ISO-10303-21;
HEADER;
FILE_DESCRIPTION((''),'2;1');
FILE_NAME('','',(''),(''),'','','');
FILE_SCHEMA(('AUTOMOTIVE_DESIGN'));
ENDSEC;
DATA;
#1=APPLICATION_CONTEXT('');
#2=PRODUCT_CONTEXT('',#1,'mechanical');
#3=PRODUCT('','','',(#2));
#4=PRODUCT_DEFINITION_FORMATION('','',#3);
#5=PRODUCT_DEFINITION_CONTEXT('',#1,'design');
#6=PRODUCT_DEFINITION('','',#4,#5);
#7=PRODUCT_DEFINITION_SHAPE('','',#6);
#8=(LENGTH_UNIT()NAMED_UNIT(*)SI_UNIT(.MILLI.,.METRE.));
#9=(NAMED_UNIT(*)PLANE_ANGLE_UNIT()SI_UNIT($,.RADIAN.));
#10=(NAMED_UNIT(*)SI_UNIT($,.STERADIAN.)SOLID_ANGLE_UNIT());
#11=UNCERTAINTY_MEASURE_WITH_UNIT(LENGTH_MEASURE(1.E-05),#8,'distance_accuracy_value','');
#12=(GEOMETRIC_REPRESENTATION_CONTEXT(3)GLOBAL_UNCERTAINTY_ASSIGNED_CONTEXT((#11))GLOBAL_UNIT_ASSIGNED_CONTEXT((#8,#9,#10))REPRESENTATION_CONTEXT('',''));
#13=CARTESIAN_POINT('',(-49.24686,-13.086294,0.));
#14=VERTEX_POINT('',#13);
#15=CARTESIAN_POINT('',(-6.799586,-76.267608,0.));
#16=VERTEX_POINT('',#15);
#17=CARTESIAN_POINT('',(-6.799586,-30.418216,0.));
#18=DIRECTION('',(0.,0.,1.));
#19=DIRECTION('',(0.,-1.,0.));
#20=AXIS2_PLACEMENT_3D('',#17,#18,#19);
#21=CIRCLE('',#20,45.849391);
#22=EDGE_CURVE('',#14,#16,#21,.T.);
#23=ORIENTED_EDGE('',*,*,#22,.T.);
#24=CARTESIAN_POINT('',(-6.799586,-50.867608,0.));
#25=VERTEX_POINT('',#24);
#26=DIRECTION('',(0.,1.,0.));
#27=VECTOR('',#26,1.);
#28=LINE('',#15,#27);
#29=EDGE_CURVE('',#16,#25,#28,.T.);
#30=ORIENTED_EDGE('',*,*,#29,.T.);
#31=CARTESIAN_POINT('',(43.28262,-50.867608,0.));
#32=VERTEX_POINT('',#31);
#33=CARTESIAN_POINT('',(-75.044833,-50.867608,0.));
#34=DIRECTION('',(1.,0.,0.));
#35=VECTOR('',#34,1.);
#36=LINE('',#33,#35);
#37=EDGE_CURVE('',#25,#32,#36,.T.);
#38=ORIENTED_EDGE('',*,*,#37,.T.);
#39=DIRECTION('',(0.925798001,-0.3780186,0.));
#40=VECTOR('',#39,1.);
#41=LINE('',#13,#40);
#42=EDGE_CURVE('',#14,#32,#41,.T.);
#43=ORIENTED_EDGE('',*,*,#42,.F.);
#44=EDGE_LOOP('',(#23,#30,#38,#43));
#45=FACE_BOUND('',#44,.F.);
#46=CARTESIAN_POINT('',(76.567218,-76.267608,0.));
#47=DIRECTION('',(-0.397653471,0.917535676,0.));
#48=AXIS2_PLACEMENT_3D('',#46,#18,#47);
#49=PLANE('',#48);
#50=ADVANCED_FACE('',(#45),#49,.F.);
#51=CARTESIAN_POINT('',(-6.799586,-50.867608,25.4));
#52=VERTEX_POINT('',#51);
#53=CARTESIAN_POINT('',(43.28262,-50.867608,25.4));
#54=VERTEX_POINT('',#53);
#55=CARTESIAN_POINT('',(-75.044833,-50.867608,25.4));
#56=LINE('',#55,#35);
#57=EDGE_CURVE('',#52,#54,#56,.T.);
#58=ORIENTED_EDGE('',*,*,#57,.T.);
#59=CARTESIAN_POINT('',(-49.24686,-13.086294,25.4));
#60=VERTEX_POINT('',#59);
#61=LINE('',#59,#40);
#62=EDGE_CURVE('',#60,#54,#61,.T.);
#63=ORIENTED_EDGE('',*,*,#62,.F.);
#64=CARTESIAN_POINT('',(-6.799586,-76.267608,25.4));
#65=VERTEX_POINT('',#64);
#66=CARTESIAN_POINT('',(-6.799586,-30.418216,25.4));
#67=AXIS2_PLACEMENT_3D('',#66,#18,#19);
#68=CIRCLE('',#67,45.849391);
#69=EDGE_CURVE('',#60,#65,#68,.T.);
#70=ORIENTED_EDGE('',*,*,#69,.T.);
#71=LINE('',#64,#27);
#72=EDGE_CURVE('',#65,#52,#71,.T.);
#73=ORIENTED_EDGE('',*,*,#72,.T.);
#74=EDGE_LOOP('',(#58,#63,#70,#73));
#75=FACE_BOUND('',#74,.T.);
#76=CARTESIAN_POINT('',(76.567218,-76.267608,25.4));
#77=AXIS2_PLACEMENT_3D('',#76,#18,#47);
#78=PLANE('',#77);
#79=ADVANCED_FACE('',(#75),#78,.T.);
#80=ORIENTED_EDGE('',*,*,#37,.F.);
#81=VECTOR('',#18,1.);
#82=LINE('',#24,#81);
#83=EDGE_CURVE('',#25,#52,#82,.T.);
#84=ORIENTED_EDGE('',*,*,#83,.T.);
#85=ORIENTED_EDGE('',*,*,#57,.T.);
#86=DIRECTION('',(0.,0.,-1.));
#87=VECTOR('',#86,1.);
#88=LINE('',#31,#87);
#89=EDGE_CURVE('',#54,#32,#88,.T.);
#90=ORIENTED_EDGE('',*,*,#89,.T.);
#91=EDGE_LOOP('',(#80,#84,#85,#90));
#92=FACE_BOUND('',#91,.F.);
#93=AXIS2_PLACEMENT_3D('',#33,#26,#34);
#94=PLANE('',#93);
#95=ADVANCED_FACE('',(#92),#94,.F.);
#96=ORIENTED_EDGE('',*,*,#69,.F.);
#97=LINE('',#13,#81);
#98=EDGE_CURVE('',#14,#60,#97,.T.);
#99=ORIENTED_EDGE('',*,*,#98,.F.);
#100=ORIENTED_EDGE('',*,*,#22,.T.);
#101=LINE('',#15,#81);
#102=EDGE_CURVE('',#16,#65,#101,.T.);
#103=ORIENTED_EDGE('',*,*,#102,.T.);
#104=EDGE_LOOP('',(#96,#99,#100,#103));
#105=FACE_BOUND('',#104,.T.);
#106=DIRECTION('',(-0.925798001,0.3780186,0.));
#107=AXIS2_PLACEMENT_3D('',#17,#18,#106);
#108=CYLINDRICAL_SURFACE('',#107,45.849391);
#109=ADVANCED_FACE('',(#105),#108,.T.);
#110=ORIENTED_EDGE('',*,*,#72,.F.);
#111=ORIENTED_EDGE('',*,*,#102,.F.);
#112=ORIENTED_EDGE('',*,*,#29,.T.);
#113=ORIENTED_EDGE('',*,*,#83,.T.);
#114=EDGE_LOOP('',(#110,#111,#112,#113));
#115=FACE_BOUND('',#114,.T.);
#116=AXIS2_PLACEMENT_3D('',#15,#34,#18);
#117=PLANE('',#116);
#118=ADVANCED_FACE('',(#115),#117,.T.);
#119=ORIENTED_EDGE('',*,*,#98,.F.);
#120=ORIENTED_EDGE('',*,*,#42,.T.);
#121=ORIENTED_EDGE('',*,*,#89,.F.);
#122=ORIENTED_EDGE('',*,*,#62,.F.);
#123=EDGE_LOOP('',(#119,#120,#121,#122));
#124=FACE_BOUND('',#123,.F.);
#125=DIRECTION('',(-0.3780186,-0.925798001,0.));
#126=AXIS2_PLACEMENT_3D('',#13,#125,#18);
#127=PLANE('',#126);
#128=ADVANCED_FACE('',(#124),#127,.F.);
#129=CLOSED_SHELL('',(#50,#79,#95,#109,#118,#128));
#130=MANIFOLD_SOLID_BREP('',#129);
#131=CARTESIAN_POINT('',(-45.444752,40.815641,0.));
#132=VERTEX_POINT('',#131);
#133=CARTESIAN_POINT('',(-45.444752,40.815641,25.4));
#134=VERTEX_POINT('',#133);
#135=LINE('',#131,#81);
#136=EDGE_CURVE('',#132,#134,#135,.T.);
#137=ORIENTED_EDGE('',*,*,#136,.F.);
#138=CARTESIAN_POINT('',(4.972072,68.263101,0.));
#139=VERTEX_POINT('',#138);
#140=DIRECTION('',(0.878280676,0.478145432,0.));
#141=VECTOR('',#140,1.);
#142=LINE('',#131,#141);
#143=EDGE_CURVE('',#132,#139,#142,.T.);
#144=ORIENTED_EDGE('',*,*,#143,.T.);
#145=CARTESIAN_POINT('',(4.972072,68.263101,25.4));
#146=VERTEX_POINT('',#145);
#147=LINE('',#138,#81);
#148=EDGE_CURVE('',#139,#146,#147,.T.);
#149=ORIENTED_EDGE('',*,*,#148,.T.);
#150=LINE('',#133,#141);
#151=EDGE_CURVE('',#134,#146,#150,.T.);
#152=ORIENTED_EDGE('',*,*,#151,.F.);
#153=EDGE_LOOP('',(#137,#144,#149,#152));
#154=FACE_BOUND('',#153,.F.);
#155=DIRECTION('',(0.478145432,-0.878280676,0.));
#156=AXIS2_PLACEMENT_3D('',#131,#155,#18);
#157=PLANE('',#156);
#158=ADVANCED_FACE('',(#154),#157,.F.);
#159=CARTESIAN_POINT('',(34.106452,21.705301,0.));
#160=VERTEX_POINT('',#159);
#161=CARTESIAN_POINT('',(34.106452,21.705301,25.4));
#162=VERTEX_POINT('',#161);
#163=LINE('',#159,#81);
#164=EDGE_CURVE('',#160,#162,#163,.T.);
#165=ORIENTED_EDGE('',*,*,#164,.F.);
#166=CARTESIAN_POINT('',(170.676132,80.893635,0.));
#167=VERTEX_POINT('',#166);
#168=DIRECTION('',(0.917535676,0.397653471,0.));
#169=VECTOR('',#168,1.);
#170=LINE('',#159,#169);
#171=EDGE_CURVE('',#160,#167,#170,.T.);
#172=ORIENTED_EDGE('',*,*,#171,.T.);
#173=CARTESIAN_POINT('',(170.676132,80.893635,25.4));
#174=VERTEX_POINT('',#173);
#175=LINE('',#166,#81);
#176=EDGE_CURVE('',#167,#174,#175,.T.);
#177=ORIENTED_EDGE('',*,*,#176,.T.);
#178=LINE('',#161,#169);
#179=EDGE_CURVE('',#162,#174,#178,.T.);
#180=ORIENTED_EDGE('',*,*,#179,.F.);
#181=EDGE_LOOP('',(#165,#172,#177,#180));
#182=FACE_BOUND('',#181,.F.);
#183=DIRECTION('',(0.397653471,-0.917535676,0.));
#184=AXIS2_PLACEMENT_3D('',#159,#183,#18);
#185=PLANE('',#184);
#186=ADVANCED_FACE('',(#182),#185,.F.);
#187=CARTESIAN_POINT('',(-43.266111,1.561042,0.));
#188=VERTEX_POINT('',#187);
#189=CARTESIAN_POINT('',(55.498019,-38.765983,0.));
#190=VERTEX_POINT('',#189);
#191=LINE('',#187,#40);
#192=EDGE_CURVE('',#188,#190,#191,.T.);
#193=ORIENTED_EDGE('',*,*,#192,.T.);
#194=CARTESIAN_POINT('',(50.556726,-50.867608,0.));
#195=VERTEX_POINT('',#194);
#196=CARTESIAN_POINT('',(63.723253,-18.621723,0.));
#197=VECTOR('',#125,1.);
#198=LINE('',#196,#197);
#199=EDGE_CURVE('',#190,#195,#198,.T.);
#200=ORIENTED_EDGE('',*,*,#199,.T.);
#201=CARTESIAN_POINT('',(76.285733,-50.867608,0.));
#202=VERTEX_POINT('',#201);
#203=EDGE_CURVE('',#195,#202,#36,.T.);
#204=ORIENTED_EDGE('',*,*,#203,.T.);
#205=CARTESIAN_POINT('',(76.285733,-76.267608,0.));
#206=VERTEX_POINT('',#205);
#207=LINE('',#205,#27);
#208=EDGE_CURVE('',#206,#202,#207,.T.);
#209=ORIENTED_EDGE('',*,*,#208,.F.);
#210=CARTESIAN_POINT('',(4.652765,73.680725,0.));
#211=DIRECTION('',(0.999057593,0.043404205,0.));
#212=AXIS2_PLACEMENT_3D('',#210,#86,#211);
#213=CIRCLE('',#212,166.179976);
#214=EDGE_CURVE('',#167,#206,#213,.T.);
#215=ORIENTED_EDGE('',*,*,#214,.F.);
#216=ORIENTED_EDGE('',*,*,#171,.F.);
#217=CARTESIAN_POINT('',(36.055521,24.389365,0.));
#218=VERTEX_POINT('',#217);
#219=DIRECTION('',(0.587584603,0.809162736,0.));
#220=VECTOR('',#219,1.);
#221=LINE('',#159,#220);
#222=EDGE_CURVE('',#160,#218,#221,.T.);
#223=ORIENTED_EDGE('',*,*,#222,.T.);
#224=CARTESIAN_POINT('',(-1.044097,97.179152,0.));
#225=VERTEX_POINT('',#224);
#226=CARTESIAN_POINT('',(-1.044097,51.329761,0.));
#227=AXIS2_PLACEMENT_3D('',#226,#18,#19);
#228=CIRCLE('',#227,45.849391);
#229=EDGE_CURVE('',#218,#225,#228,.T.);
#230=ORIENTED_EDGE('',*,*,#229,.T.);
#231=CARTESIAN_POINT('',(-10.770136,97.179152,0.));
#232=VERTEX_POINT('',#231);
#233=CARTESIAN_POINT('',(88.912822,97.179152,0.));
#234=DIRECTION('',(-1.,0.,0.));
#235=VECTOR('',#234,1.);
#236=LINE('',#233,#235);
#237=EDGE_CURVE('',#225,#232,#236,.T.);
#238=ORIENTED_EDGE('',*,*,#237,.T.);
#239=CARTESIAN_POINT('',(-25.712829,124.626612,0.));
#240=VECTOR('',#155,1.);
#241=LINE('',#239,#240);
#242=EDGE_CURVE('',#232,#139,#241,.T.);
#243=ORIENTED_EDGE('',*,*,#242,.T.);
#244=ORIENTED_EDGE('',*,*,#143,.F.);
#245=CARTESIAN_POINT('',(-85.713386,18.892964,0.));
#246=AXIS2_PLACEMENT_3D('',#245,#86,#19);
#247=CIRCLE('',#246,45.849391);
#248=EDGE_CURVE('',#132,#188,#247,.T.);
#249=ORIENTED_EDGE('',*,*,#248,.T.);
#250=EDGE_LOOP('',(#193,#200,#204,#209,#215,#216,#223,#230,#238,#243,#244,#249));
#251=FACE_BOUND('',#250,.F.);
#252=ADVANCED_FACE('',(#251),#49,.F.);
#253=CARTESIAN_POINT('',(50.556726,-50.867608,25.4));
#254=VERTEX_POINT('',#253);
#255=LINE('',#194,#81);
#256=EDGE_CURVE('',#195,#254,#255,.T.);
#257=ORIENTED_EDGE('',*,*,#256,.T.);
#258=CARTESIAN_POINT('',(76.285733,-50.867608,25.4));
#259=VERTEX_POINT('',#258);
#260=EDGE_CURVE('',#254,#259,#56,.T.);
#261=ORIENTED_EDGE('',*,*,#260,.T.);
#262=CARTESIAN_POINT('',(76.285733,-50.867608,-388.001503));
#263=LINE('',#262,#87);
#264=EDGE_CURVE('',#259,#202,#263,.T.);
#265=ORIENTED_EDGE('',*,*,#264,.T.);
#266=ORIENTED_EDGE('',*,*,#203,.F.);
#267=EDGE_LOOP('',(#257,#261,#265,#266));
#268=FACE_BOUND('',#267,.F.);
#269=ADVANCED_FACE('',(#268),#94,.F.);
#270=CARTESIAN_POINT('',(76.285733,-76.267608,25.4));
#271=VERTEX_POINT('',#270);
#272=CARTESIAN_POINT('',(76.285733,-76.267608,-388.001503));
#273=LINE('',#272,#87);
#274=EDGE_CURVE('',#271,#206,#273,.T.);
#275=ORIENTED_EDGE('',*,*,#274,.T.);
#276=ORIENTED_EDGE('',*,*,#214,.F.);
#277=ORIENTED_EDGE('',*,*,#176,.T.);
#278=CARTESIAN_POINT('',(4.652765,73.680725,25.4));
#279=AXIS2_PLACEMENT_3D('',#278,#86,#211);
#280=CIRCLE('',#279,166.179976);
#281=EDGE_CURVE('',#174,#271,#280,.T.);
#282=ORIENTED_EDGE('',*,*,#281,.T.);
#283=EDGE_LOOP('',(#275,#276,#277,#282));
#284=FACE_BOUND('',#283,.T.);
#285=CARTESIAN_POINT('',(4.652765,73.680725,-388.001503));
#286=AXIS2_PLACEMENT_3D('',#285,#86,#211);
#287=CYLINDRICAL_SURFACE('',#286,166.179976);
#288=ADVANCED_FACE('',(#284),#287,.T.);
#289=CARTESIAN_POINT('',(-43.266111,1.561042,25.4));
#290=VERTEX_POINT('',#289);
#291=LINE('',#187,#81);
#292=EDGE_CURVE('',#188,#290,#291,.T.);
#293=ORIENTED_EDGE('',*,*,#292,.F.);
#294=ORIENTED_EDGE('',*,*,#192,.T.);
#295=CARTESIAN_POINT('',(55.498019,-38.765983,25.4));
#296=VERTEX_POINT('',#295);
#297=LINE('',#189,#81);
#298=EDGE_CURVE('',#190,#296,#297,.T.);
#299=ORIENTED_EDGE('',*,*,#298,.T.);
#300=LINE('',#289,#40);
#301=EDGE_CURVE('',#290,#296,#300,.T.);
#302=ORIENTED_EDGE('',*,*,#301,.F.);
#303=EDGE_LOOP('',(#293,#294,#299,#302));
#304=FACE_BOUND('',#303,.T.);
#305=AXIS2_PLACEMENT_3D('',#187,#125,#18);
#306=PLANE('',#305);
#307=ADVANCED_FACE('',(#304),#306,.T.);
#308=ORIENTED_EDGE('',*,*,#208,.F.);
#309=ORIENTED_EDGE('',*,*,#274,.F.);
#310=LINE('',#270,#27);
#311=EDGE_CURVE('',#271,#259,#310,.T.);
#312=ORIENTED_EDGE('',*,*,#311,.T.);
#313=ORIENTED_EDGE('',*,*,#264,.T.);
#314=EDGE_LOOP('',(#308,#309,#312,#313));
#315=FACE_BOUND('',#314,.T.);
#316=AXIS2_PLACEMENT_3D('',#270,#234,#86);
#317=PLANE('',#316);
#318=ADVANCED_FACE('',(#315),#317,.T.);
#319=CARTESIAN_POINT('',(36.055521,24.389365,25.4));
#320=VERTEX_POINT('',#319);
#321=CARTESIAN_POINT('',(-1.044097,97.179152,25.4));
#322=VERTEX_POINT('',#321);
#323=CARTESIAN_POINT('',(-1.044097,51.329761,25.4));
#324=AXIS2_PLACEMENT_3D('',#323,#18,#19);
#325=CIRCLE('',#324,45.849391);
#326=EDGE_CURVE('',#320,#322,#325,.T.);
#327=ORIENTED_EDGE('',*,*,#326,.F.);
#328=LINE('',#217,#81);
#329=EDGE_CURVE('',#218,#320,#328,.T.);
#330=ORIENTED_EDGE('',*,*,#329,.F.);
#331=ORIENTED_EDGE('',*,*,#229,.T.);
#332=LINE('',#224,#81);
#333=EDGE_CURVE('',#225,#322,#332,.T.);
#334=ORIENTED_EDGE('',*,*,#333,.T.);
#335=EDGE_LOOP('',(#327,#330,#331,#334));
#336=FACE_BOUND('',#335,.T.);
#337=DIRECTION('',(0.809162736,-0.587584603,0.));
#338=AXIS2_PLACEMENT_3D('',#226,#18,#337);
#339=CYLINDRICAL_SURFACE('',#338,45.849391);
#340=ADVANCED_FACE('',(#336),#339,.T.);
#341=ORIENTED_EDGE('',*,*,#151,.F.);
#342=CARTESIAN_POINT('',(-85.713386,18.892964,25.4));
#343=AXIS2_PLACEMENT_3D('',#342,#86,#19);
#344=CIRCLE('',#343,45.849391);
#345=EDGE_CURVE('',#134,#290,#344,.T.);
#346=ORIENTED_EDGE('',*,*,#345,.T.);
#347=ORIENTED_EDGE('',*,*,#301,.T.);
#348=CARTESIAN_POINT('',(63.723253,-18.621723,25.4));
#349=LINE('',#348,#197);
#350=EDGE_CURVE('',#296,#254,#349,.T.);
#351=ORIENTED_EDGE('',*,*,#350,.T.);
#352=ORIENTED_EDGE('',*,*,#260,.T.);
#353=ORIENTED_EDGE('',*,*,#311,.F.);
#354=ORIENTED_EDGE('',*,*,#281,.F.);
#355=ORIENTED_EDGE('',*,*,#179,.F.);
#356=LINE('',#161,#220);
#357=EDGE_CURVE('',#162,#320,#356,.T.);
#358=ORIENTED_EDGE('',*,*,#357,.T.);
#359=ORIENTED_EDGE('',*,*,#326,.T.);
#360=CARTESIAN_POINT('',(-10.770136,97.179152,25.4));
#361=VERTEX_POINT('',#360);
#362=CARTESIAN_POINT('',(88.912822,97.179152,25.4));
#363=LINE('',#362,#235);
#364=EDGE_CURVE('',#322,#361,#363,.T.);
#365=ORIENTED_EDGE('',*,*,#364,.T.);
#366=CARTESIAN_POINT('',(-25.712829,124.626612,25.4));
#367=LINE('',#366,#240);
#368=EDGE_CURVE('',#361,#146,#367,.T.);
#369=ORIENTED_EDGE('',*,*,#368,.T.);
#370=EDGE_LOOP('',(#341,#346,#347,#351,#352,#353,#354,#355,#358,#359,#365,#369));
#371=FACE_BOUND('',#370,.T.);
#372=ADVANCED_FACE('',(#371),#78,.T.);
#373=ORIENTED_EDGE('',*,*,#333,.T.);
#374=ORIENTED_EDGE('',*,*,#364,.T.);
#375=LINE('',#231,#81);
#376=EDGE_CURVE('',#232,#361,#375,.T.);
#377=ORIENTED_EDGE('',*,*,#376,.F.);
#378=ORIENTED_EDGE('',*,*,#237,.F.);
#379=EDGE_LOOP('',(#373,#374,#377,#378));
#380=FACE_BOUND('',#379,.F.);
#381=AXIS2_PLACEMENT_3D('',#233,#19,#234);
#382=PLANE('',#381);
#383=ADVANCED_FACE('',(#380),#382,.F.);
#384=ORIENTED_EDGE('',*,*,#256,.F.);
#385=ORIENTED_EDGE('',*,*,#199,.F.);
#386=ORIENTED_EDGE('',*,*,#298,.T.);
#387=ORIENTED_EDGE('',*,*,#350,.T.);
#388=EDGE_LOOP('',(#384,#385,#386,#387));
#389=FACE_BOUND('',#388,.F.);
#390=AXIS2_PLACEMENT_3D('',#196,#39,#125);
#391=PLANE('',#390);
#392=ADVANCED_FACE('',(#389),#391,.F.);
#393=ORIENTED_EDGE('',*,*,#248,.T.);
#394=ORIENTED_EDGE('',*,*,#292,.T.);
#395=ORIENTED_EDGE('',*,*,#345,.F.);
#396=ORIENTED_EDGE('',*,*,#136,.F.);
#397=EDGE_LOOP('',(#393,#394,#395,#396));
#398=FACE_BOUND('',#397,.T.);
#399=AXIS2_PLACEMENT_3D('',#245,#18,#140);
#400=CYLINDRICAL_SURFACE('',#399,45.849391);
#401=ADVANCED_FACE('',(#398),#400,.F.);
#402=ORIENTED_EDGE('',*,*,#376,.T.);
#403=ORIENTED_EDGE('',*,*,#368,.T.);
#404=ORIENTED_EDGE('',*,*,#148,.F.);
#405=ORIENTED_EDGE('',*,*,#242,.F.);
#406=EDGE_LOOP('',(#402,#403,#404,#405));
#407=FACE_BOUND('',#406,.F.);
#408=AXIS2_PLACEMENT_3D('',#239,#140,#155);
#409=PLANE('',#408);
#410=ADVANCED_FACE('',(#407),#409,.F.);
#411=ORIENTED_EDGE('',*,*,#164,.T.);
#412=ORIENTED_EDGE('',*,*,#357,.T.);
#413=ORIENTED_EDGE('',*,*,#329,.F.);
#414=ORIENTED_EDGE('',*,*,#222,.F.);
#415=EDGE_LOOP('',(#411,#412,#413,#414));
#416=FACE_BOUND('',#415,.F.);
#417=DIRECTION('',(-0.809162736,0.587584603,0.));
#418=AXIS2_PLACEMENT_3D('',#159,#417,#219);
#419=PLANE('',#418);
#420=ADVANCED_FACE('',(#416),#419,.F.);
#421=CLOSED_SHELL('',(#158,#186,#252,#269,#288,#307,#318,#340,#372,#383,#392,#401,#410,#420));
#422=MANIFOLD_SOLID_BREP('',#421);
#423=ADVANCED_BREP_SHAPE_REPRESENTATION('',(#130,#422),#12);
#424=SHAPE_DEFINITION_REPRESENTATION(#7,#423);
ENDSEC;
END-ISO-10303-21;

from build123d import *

# Parameters (mm, degrees)
F1_DEPTH    = 25.4
F2_R        = 45.8493910303
F3_DEPTH    = 148.844
F4_DEPTH    = 106.68
F5_DEPTH    = 57.404
F6_T1_DEPTH = 801.4030056795
F7_DEPTH    = 25.4


# Not quite as in the source:
# - a fillet or chamfer that OpenCascade refuses, or shapes differently, is made with other operations: its cross-section is extruded or revolved along the edge and cut away or added


with BuildPart() as f1:
    # F0 (on Top) → F1 (new body)
    with BuildSketch(Plane.XY):
        with BuildLine():
            Line((-75.0448331237, -76.2676075101), (0, 0))
            add(Edge.make_bspline(
                [(0, 0), (-17.1607195909, -0.0678450845), (-34.6268538829, 9.7280369702), (-35.0408777595, 21.7053014785)],
                knots=[0, 0, 0, 0, 0.2466068587, 0.2466068587, 0.2466068587, 0.2466068587], degree=3))
            Line((-35.0408777595, 21.7053014785), (-75.0448331237, -76.2676075101))
        make_face()
        with BuildLine():
            add(Edge.make_bspline(
                [(0, 0), (-17.1607195909, -0.0678450845), (-34.6268538829, 9.7280369702), (-35.0408777595, 21.7053014785)],
                knots=[0, 0, 0, 0, 0.2466068587, 0.2466068587, 0.2466068587, 0.2466068587], degree=3))
            add(Edge.make_bspline(
                [(34.106452018, 21.7053014785), (33.6908138887, 9.8087295701), (16.995182387, 0.0671906315), (0, 0)],
                knots=[0.7557719815, 0.7557719815, 0.7557719815, 0.7557719815, 1, 1, 1, 1], degree=3))
            add(Edge.make_bspline(
                [(0, 48.8035753369), (17.42740955, 48.7254776276), (34.5378985933, 34.0543494732), (34.106452018, 21.7053014785)],
                knots=[0.5022549562, 0.5022549562, 0.5022549562, 0.5022549562, 0.7557719815, 0.7557719815, 0.7557719815, 0.7557719815], degree=3))
            add(Edge.make_bspline(
                [(-35.0408777595, 21.7053014785), (-35.4700808114, 34.1216831702), (-17.5739049114, 48.8823295381), (0, 48.8035753369)],
                knots=[0.2466068587, 0.2466068587, 0.2466068587, 0.2466068587, 0.5022549562, 0.5022549562, 0.5022549562, 0.5022549562], degree=3))
        make_face()
        Polygon((76.5672177076, -76.2676075101), (0, 0), (-75.0448331237, -76.2676075101), align=None)
        with BuildLine():
            add(Edge.make_bspline(
                [(34.106452018, 21.7053014785), (33.6908138887, 9.8087295701), (16.995182387, 0.0671906315), (0, 0)],
                knots=[0.7557719815, 0.7557719815, 0.7557719815, 0.7557719815, 1, 1, 1, 1], degree=3))
            Line((0, 0), (76.5672177076, -76.2676075101))
            Line((76.5672177076, -76.2676075101), (34.106452018, 21.7053014785))
        make_face()
        with BuildLine():
            Line((-76.1296525598, 97.1791520715), (-35.0408777595, 21.7053014785))
            add(Edge.make_bspline(
                [(-35.0408777595, 21.7053014785), (-35.4700808114, 34.1216831702), (-17.5739049114, 48.8823295381), (0, 48.8035753369)],
                knots=[0.2466068587, 0.2466068587, 0.2466068587, 0.2466068587, 0.5022549562, 0.5022549562, 0.5022549562, 0.5022549562], degree=3))
            Line((0, 48.8035753369), (0, 97.1791520715))
            Line((0, 97.1791520715), (-76.1296525598, 97.1791520715))
        make_face()
        with BuildLine():
            add(Edge.make_bspline(
                [(0, 48.8035753369), (17.42740955, 48.7254776276), (34.5378985933, 34.0543494732), (34.106452018, 21.7053014785)],
                knots=[0.5022549562, 0.5022549562, 0.5022549562, 0.5022549562, 0.7557719815, 0.7557719815, 0.7557719815, 0.7557719815], degree=3))
            Line((34.106452018, 21.7053014785), (88.9128223062, 97.1791520715))
            Line((88.9128223062, 97.1791520715), (0, 97.1791520715))
            Line((0, 97.1791520715), (0, 48.8035753369))
        make_face()
    extrude(amount=F1_DEPTH)

    # F2
    f2_edges = [f1.edges().sort_by_distance(p)[0] for p in [
        (88.912822, 97.179152, 12.7),
        (-35.040878, 21.705301, 12.7),
        (-75.044833, -76.267608, 12.7),
    ]]
    fillet(f2_edges, radius=F2_R)

    # F3 (add): a face of the model
    f3_faces = [f1.faces().sort_by_distance(p)[0] for p in [
        (55.3368348628, -27.2811530158, 12.7),
    ]]
    extrude(f3_faces, amount=F3_DEPTH)

    # F4 (cut): a face of the model
    f4_faces = [f1.faces().sort_by_distance(p)[0] for p in [
        (-46.2564858481, -5.7626261429, 12.7),
    ]]
    extrude(f4_faces, amount=-F4_DEPTH, mode=Mode.SUBTRACT)

    # F5 (cut): a face of the model
    f5_faces = [f1.faces().sort_by_distance(p)[0] for p in [
        (-60.7872022152, 68.997396576, 12.7),
    ]]
    extrude(f5_faces, amount=-F5_DEPTH, mode=Mode.SUBTRACT)

    # F6: fillet of radius 166.1799763524 on 1 edges, made by hand

    # F6_s2 → F6_t1 (cut)
    with BuildSketch(Plane.XY.offset(-388.0015028397)):
        with BuildLine():
            ThreePointArc((170.6761321798, 80.8936347588), (145.5192693359, -14.4805618017), (70.7348093872, -78.7953320174))
            Line((70.7348093872, -78.7953320174), (213.1368978695, -17.0792742298))
            Line((213.1368978695, -17.0792742298), (170.6761321798, 80.8936347588))
        make_face()
    extrude(amount=F6_T1_DEPTH, mode=Mode.SUBTRACT)

    # F7 (cut): a face of the model
    f7_faces = [f1.faces().sort_by_distance(p)[0] for p in [
        (34.7430737503, -76.2676075101, 12.7),
    ]]
    extrude(f7_faces, amount=-F7_DEPTH, mode=Mode.SUBTRACT)


solid = f1.part
